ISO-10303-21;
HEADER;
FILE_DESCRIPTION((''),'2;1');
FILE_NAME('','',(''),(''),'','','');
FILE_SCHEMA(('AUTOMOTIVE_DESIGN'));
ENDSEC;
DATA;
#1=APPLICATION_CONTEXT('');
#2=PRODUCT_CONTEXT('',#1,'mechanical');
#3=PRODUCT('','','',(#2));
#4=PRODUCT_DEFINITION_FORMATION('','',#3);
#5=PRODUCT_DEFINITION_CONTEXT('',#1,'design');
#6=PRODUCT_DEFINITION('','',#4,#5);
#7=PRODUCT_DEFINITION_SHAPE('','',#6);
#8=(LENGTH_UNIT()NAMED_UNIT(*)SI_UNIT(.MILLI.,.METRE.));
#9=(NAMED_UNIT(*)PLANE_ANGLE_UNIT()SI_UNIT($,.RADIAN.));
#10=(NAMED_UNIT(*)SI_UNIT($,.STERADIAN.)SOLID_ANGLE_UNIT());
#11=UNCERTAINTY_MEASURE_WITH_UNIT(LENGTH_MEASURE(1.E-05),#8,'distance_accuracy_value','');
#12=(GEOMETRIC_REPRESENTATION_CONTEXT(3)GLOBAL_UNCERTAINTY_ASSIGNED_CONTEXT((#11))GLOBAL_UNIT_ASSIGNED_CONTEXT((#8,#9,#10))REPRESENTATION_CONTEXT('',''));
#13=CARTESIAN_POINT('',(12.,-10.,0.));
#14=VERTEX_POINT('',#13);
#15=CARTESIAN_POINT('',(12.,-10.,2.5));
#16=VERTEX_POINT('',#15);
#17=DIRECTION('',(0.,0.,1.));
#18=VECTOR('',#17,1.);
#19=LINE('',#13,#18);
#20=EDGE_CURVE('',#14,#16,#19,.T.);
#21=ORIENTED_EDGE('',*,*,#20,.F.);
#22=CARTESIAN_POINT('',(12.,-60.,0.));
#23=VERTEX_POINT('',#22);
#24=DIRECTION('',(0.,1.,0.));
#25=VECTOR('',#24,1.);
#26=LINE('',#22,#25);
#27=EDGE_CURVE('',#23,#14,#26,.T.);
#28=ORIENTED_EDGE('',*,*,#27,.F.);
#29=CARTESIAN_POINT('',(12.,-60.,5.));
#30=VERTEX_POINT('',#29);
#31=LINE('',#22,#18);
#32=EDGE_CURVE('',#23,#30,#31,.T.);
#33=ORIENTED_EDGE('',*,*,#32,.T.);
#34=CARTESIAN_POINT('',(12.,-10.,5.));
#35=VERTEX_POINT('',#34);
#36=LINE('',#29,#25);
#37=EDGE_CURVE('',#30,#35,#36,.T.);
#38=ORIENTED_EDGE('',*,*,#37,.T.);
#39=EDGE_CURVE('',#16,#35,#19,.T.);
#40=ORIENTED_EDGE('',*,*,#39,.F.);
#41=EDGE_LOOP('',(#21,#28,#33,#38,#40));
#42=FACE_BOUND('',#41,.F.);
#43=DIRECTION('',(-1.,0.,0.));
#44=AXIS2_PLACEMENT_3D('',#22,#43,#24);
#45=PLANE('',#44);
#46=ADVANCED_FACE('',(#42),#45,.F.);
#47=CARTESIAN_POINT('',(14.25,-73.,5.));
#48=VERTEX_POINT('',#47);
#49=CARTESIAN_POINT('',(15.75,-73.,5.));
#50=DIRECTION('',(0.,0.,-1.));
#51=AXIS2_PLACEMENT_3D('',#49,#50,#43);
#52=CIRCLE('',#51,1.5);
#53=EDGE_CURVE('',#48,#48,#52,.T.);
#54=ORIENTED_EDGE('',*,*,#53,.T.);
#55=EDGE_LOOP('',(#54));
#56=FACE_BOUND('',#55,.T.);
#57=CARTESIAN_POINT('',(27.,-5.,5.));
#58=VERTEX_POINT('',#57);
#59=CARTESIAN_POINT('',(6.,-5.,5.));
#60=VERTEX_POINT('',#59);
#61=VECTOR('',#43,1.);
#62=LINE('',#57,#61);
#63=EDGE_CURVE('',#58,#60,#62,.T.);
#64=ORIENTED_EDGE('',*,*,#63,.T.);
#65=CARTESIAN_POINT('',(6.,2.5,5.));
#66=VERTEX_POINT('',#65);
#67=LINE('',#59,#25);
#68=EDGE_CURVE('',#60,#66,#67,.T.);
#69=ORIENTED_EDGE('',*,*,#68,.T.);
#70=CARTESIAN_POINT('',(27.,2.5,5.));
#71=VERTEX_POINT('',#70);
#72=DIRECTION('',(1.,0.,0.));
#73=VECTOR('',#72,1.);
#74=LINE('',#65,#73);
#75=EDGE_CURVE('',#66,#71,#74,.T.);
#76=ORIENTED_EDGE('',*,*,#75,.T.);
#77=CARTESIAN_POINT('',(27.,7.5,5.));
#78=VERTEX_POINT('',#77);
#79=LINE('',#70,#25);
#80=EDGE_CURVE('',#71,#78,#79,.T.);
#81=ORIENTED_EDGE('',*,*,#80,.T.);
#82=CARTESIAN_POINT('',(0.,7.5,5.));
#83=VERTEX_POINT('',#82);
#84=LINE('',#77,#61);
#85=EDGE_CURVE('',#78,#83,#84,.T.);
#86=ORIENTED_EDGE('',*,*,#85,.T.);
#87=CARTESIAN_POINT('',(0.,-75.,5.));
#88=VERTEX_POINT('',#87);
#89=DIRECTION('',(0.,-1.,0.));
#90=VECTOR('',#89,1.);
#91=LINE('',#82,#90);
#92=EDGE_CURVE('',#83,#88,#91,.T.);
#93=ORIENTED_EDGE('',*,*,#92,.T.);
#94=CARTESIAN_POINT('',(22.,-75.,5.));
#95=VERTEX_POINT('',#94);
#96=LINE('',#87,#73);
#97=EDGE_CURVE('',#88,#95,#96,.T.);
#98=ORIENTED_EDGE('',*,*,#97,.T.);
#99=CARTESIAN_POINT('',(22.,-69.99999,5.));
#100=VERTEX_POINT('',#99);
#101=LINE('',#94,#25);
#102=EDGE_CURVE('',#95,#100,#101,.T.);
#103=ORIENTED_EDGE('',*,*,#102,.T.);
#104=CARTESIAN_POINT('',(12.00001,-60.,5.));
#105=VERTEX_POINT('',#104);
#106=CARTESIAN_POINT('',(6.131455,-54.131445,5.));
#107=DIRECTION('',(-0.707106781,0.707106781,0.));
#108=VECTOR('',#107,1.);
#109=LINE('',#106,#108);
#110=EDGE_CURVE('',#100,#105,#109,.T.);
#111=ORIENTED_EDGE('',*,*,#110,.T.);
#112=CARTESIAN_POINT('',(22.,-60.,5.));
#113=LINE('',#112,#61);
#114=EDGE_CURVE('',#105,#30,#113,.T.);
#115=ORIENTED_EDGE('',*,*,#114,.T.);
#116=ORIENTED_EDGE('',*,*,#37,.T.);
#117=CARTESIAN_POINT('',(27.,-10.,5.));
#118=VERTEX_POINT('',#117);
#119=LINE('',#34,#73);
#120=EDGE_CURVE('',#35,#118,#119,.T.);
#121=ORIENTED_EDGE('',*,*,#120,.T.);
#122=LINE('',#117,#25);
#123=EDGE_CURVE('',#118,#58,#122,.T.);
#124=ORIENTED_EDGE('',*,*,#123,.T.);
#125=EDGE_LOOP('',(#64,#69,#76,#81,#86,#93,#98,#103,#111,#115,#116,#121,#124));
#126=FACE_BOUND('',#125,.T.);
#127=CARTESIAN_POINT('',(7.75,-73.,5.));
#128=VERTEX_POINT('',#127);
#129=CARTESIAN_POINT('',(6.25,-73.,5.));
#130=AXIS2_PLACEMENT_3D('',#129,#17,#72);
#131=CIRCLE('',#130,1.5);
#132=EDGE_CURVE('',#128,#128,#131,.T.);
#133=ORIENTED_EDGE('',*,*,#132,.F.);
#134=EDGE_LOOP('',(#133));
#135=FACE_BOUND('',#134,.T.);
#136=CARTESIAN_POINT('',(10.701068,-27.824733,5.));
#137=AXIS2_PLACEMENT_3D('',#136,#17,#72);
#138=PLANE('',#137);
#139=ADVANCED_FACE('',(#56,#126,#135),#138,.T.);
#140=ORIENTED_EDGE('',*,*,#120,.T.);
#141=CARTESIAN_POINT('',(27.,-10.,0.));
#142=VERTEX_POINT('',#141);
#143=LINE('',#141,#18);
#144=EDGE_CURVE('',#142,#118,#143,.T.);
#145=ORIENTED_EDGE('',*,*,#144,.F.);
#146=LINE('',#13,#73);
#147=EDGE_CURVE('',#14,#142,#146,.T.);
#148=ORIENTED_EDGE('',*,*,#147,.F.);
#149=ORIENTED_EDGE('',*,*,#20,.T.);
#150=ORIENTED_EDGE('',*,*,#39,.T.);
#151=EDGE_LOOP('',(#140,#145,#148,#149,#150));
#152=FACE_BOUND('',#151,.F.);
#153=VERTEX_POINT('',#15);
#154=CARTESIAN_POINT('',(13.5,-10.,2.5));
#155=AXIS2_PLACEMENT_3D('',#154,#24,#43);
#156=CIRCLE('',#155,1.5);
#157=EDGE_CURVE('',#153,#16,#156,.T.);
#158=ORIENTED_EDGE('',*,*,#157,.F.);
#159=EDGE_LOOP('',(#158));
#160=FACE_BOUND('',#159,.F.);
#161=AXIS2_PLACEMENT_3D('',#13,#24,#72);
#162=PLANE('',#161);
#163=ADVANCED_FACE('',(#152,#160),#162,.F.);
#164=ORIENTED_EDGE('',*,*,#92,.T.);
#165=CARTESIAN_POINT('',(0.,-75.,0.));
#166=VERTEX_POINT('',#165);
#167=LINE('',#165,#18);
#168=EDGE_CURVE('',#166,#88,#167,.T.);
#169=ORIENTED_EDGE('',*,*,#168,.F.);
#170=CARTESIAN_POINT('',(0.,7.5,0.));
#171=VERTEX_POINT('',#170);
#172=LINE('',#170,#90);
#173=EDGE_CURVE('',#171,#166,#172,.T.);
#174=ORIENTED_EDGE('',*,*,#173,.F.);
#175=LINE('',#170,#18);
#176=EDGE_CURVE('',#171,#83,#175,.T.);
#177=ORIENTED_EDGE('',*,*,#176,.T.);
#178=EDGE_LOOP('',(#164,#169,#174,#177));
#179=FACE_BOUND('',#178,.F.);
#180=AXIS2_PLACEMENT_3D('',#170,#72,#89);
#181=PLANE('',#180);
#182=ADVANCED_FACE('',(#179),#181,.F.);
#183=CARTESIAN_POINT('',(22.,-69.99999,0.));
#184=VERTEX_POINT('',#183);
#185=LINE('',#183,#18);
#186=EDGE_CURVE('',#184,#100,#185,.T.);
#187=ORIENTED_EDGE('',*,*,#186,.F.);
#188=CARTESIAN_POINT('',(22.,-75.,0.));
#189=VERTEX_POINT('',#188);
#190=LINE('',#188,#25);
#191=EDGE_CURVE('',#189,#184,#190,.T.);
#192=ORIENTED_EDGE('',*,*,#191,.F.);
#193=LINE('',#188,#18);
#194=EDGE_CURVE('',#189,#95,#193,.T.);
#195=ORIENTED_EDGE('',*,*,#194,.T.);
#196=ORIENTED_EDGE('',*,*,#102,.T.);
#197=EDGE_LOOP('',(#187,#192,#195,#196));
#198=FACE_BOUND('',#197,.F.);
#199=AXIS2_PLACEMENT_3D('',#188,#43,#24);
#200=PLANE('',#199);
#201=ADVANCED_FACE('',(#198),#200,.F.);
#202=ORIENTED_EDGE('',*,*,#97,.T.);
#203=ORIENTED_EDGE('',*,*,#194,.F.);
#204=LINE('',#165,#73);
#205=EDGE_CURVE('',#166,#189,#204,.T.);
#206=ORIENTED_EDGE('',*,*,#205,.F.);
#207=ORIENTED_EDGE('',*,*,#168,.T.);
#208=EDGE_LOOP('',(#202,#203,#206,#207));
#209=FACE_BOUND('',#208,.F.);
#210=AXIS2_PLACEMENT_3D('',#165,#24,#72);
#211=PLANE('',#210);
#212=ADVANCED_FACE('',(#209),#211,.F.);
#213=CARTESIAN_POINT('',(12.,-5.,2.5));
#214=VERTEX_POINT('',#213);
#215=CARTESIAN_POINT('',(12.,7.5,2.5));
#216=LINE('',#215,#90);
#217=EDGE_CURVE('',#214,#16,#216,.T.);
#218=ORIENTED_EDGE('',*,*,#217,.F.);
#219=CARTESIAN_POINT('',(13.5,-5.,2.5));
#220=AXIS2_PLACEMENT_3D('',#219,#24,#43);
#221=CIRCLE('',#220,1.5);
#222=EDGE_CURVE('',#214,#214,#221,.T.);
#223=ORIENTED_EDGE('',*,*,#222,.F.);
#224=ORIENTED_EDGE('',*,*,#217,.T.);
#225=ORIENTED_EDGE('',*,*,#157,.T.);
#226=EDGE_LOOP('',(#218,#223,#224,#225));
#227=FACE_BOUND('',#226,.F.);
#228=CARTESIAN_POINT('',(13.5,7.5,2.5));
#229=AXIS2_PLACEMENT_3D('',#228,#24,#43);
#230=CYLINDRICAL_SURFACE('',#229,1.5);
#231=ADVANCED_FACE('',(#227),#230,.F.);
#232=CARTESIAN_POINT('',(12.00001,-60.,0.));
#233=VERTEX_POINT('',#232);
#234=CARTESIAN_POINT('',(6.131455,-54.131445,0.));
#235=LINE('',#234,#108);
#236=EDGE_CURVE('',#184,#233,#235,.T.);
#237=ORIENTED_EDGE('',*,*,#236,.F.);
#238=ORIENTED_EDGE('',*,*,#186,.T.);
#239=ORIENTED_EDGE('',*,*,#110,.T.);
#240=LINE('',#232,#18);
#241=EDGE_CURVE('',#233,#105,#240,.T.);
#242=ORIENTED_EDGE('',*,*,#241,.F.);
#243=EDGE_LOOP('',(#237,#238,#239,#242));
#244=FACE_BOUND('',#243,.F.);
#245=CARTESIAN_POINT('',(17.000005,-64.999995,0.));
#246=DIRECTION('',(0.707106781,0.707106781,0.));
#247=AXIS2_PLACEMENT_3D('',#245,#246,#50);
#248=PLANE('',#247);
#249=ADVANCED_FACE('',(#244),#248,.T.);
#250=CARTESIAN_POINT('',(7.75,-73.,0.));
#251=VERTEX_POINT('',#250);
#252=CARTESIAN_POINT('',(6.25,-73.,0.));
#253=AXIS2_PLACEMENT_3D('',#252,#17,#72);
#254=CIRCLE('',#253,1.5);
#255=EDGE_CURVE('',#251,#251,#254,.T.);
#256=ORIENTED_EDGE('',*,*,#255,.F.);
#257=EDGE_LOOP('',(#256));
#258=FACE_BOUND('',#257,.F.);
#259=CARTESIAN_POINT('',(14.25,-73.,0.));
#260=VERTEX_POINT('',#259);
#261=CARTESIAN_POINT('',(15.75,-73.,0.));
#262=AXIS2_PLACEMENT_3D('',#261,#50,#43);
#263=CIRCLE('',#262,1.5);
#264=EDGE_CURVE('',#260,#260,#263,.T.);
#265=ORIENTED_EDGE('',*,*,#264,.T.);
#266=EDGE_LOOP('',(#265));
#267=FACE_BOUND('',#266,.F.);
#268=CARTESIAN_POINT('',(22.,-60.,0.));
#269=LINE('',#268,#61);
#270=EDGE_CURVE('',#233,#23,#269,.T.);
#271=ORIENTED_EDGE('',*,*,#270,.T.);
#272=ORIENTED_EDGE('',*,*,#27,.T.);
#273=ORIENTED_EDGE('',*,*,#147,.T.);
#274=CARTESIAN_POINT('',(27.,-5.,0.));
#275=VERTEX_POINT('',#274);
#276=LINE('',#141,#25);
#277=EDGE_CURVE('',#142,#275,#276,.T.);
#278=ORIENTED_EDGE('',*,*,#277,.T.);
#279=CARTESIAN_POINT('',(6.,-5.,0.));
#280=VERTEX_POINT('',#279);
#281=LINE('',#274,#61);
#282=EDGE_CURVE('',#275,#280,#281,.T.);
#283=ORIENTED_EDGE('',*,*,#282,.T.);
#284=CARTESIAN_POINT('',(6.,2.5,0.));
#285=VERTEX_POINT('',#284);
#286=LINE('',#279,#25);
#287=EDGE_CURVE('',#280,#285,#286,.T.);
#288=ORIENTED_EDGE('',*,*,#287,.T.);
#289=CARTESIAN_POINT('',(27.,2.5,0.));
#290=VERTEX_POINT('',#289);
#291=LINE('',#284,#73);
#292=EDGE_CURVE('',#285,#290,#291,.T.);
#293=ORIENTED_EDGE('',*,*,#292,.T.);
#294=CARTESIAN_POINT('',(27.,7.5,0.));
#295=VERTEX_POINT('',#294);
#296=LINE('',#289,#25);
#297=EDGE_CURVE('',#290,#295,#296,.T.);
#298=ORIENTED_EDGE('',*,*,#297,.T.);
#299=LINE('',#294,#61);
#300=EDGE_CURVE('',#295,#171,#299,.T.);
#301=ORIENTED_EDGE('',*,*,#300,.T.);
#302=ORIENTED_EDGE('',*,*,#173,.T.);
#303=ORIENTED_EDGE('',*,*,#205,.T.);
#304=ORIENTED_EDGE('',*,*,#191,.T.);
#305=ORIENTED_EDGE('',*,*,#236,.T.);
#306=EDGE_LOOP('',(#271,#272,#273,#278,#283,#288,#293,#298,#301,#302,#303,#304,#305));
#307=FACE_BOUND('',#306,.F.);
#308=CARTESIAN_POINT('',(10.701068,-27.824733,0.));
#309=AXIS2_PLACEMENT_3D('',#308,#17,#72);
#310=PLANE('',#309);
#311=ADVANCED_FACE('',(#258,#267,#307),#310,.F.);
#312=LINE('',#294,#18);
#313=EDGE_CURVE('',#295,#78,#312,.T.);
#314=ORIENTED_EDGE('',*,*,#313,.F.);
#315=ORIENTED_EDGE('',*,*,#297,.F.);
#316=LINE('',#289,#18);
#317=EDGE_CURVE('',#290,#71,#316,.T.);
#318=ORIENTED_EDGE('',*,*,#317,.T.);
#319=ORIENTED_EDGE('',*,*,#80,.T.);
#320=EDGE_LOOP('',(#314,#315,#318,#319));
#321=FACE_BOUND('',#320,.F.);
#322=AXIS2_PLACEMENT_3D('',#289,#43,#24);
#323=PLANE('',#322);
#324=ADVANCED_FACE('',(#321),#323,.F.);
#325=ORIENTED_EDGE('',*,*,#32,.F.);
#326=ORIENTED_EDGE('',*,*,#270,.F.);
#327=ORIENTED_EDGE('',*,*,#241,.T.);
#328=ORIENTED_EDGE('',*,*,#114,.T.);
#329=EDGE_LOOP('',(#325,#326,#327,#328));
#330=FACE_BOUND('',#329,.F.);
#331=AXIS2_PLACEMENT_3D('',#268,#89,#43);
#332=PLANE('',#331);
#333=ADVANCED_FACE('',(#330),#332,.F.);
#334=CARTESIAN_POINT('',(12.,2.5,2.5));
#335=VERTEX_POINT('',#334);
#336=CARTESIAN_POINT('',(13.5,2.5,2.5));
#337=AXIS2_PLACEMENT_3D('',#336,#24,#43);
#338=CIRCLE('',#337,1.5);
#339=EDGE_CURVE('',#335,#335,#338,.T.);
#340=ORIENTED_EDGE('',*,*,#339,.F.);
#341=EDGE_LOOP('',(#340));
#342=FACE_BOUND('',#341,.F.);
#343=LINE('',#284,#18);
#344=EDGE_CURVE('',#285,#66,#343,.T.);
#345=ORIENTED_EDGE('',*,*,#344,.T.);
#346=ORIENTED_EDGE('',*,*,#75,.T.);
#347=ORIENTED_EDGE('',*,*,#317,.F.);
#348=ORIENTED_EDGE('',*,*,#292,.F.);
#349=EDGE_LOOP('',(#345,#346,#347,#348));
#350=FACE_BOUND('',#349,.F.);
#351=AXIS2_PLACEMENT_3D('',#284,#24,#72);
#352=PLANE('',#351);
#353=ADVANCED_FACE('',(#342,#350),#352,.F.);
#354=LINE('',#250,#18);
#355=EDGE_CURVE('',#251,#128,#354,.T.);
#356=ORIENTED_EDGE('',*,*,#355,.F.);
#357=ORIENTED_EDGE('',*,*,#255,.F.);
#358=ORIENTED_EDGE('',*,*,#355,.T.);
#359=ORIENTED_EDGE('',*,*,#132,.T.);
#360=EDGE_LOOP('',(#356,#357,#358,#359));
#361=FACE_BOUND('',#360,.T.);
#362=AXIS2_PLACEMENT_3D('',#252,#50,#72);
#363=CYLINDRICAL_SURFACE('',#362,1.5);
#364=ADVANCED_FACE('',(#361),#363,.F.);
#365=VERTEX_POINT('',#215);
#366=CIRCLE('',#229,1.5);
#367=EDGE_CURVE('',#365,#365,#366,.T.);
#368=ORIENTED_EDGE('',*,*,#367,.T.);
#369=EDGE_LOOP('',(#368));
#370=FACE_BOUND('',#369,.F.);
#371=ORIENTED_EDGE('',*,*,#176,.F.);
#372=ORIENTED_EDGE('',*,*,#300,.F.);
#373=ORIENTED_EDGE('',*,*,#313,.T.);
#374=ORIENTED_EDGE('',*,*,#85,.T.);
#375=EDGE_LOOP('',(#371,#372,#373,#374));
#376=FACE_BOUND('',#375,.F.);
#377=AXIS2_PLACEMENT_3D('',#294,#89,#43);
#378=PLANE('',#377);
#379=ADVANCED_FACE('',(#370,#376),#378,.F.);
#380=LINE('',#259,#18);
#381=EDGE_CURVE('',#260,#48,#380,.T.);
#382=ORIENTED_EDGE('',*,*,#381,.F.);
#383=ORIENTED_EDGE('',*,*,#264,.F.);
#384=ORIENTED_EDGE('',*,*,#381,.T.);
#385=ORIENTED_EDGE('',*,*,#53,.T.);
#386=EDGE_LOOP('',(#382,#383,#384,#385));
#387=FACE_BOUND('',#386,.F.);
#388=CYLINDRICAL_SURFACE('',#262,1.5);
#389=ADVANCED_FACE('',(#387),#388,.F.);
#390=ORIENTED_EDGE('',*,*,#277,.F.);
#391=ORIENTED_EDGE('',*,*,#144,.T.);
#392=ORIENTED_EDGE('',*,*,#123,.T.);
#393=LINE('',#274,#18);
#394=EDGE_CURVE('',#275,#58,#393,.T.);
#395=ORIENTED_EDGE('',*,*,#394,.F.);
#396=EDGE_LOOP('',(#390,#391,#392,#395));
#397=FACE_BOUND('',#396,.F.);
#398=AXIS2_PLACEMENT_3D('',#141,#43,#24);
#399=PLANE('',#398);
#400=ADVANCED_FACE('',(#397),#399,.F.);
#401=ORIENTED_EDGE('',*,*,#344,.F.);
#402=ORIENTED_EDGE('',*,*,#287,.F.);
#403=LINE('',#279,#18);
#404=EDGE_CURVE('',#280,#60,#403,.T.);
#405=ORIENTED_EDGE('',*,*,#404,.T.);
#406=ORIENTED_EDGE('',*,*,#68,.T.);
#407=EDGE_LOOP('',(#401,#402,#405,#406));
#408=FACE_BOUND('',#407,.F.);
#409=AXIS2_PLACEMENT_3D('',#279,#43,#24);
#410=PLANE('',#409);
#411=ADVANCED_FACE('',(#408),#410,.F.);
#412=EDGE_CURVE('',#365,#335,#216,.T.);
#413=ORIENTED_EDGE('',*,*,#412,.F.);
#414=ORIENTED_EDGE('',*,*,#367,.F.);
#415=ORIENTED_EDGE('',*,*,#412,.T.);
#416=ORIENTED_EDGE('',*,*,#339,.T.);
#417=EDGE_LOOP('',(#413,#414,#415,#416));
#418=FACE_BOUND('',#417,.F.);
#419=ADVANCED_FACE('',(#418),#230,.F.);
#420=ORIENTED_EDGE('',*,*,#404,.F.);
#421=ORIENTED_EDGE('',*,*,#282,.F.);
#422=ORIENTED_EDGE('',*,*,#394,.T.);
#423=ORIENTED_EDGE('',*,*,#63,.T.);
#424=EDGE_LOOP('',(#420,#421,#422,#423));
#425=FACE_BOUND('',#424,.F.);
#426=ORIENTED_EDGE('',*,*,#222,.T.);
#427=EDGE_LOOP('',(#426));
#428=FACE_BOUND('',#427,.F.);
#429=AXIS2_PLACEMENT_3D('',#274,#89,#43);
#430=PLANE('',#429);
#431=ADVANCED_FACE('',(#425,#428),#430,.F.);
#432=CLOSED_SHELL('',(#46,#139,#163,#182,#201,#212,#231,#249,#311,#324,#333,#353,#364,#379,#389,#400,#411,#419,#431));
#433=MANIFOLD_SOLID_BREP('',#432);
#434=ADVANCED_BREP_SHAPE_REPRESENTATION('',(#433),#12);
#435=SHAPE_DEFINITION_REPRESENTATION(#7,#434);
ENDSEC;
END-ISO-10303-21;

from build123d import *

# Parameters (mm, degrees)
F0_R     = 1.5
F1_DEPTH = 5
F2_SIZE  = 9.99999
F4_DEPTH = 25


# Not quite as in the source:
# - a fillet or chamfer is up to 0.001 mm smaller than in the source, because OpenCascade refuses the exact size


with BuildPart() as f1:
    # F0 (on Top) → F1 (new body)
    with BuildSketch(Plane.XY):
        Polygon((0, 7.5), (0, 0), (0, -75), (11, -75), (22, -75), (22, -60), (12, -60), (12, -10), (27, -10), (27, -5), (6, -5), (6, 2.5), (27, 2.5), (27, 7.5), align=None)
        with Locations((6.25, -73)):
            Circle(F0_R, mode=Mode.SUBTRACT)
        with BuildLine():
            ThreePointArc((17.25, -73), (15.75, -74.5), (14.25, -73))
            ThreePointArc((14.25, -73), (15.75, -71.5), (17.25, -73))
        make_face(mode=Mode.SUBTRACT)
    extrude(amount=F1_DEPTH)

    # F2 (size 10 in the source; OpenCascade refuses exactly that, so slightly less here)
    f2_edges = [f1.edges().sort_by_distance(p)[0] for p in [
        (22, -60, 2.5),
    ]]
    chamfer(f2_edges, length=F2_SIZE)

    # F3 (on face) → F4 (cut)
    with BuildSketch(Plane(origin=(0, 7.5, 0), x_dir=(-1, 0, 0), z_dir=(0, 1, 0))):
        with BuildLine():
            ThreePointArc((-15, 2.5), (-13.5, 1), (-12, 2.5))
            Line((-12, 2.5), (-15, 2.5))
        make_face()
        with BuildLine():
            Line((-15, 2.5), (-12, 2.5))
            ThreePointArc((-12, 2.5), (-13.5, 4), (-15, 2.5))
        make_face()
    extrude(amount=-F4_DEPTH, mode=Mode.SUBTRACT)


solid = f1.part
